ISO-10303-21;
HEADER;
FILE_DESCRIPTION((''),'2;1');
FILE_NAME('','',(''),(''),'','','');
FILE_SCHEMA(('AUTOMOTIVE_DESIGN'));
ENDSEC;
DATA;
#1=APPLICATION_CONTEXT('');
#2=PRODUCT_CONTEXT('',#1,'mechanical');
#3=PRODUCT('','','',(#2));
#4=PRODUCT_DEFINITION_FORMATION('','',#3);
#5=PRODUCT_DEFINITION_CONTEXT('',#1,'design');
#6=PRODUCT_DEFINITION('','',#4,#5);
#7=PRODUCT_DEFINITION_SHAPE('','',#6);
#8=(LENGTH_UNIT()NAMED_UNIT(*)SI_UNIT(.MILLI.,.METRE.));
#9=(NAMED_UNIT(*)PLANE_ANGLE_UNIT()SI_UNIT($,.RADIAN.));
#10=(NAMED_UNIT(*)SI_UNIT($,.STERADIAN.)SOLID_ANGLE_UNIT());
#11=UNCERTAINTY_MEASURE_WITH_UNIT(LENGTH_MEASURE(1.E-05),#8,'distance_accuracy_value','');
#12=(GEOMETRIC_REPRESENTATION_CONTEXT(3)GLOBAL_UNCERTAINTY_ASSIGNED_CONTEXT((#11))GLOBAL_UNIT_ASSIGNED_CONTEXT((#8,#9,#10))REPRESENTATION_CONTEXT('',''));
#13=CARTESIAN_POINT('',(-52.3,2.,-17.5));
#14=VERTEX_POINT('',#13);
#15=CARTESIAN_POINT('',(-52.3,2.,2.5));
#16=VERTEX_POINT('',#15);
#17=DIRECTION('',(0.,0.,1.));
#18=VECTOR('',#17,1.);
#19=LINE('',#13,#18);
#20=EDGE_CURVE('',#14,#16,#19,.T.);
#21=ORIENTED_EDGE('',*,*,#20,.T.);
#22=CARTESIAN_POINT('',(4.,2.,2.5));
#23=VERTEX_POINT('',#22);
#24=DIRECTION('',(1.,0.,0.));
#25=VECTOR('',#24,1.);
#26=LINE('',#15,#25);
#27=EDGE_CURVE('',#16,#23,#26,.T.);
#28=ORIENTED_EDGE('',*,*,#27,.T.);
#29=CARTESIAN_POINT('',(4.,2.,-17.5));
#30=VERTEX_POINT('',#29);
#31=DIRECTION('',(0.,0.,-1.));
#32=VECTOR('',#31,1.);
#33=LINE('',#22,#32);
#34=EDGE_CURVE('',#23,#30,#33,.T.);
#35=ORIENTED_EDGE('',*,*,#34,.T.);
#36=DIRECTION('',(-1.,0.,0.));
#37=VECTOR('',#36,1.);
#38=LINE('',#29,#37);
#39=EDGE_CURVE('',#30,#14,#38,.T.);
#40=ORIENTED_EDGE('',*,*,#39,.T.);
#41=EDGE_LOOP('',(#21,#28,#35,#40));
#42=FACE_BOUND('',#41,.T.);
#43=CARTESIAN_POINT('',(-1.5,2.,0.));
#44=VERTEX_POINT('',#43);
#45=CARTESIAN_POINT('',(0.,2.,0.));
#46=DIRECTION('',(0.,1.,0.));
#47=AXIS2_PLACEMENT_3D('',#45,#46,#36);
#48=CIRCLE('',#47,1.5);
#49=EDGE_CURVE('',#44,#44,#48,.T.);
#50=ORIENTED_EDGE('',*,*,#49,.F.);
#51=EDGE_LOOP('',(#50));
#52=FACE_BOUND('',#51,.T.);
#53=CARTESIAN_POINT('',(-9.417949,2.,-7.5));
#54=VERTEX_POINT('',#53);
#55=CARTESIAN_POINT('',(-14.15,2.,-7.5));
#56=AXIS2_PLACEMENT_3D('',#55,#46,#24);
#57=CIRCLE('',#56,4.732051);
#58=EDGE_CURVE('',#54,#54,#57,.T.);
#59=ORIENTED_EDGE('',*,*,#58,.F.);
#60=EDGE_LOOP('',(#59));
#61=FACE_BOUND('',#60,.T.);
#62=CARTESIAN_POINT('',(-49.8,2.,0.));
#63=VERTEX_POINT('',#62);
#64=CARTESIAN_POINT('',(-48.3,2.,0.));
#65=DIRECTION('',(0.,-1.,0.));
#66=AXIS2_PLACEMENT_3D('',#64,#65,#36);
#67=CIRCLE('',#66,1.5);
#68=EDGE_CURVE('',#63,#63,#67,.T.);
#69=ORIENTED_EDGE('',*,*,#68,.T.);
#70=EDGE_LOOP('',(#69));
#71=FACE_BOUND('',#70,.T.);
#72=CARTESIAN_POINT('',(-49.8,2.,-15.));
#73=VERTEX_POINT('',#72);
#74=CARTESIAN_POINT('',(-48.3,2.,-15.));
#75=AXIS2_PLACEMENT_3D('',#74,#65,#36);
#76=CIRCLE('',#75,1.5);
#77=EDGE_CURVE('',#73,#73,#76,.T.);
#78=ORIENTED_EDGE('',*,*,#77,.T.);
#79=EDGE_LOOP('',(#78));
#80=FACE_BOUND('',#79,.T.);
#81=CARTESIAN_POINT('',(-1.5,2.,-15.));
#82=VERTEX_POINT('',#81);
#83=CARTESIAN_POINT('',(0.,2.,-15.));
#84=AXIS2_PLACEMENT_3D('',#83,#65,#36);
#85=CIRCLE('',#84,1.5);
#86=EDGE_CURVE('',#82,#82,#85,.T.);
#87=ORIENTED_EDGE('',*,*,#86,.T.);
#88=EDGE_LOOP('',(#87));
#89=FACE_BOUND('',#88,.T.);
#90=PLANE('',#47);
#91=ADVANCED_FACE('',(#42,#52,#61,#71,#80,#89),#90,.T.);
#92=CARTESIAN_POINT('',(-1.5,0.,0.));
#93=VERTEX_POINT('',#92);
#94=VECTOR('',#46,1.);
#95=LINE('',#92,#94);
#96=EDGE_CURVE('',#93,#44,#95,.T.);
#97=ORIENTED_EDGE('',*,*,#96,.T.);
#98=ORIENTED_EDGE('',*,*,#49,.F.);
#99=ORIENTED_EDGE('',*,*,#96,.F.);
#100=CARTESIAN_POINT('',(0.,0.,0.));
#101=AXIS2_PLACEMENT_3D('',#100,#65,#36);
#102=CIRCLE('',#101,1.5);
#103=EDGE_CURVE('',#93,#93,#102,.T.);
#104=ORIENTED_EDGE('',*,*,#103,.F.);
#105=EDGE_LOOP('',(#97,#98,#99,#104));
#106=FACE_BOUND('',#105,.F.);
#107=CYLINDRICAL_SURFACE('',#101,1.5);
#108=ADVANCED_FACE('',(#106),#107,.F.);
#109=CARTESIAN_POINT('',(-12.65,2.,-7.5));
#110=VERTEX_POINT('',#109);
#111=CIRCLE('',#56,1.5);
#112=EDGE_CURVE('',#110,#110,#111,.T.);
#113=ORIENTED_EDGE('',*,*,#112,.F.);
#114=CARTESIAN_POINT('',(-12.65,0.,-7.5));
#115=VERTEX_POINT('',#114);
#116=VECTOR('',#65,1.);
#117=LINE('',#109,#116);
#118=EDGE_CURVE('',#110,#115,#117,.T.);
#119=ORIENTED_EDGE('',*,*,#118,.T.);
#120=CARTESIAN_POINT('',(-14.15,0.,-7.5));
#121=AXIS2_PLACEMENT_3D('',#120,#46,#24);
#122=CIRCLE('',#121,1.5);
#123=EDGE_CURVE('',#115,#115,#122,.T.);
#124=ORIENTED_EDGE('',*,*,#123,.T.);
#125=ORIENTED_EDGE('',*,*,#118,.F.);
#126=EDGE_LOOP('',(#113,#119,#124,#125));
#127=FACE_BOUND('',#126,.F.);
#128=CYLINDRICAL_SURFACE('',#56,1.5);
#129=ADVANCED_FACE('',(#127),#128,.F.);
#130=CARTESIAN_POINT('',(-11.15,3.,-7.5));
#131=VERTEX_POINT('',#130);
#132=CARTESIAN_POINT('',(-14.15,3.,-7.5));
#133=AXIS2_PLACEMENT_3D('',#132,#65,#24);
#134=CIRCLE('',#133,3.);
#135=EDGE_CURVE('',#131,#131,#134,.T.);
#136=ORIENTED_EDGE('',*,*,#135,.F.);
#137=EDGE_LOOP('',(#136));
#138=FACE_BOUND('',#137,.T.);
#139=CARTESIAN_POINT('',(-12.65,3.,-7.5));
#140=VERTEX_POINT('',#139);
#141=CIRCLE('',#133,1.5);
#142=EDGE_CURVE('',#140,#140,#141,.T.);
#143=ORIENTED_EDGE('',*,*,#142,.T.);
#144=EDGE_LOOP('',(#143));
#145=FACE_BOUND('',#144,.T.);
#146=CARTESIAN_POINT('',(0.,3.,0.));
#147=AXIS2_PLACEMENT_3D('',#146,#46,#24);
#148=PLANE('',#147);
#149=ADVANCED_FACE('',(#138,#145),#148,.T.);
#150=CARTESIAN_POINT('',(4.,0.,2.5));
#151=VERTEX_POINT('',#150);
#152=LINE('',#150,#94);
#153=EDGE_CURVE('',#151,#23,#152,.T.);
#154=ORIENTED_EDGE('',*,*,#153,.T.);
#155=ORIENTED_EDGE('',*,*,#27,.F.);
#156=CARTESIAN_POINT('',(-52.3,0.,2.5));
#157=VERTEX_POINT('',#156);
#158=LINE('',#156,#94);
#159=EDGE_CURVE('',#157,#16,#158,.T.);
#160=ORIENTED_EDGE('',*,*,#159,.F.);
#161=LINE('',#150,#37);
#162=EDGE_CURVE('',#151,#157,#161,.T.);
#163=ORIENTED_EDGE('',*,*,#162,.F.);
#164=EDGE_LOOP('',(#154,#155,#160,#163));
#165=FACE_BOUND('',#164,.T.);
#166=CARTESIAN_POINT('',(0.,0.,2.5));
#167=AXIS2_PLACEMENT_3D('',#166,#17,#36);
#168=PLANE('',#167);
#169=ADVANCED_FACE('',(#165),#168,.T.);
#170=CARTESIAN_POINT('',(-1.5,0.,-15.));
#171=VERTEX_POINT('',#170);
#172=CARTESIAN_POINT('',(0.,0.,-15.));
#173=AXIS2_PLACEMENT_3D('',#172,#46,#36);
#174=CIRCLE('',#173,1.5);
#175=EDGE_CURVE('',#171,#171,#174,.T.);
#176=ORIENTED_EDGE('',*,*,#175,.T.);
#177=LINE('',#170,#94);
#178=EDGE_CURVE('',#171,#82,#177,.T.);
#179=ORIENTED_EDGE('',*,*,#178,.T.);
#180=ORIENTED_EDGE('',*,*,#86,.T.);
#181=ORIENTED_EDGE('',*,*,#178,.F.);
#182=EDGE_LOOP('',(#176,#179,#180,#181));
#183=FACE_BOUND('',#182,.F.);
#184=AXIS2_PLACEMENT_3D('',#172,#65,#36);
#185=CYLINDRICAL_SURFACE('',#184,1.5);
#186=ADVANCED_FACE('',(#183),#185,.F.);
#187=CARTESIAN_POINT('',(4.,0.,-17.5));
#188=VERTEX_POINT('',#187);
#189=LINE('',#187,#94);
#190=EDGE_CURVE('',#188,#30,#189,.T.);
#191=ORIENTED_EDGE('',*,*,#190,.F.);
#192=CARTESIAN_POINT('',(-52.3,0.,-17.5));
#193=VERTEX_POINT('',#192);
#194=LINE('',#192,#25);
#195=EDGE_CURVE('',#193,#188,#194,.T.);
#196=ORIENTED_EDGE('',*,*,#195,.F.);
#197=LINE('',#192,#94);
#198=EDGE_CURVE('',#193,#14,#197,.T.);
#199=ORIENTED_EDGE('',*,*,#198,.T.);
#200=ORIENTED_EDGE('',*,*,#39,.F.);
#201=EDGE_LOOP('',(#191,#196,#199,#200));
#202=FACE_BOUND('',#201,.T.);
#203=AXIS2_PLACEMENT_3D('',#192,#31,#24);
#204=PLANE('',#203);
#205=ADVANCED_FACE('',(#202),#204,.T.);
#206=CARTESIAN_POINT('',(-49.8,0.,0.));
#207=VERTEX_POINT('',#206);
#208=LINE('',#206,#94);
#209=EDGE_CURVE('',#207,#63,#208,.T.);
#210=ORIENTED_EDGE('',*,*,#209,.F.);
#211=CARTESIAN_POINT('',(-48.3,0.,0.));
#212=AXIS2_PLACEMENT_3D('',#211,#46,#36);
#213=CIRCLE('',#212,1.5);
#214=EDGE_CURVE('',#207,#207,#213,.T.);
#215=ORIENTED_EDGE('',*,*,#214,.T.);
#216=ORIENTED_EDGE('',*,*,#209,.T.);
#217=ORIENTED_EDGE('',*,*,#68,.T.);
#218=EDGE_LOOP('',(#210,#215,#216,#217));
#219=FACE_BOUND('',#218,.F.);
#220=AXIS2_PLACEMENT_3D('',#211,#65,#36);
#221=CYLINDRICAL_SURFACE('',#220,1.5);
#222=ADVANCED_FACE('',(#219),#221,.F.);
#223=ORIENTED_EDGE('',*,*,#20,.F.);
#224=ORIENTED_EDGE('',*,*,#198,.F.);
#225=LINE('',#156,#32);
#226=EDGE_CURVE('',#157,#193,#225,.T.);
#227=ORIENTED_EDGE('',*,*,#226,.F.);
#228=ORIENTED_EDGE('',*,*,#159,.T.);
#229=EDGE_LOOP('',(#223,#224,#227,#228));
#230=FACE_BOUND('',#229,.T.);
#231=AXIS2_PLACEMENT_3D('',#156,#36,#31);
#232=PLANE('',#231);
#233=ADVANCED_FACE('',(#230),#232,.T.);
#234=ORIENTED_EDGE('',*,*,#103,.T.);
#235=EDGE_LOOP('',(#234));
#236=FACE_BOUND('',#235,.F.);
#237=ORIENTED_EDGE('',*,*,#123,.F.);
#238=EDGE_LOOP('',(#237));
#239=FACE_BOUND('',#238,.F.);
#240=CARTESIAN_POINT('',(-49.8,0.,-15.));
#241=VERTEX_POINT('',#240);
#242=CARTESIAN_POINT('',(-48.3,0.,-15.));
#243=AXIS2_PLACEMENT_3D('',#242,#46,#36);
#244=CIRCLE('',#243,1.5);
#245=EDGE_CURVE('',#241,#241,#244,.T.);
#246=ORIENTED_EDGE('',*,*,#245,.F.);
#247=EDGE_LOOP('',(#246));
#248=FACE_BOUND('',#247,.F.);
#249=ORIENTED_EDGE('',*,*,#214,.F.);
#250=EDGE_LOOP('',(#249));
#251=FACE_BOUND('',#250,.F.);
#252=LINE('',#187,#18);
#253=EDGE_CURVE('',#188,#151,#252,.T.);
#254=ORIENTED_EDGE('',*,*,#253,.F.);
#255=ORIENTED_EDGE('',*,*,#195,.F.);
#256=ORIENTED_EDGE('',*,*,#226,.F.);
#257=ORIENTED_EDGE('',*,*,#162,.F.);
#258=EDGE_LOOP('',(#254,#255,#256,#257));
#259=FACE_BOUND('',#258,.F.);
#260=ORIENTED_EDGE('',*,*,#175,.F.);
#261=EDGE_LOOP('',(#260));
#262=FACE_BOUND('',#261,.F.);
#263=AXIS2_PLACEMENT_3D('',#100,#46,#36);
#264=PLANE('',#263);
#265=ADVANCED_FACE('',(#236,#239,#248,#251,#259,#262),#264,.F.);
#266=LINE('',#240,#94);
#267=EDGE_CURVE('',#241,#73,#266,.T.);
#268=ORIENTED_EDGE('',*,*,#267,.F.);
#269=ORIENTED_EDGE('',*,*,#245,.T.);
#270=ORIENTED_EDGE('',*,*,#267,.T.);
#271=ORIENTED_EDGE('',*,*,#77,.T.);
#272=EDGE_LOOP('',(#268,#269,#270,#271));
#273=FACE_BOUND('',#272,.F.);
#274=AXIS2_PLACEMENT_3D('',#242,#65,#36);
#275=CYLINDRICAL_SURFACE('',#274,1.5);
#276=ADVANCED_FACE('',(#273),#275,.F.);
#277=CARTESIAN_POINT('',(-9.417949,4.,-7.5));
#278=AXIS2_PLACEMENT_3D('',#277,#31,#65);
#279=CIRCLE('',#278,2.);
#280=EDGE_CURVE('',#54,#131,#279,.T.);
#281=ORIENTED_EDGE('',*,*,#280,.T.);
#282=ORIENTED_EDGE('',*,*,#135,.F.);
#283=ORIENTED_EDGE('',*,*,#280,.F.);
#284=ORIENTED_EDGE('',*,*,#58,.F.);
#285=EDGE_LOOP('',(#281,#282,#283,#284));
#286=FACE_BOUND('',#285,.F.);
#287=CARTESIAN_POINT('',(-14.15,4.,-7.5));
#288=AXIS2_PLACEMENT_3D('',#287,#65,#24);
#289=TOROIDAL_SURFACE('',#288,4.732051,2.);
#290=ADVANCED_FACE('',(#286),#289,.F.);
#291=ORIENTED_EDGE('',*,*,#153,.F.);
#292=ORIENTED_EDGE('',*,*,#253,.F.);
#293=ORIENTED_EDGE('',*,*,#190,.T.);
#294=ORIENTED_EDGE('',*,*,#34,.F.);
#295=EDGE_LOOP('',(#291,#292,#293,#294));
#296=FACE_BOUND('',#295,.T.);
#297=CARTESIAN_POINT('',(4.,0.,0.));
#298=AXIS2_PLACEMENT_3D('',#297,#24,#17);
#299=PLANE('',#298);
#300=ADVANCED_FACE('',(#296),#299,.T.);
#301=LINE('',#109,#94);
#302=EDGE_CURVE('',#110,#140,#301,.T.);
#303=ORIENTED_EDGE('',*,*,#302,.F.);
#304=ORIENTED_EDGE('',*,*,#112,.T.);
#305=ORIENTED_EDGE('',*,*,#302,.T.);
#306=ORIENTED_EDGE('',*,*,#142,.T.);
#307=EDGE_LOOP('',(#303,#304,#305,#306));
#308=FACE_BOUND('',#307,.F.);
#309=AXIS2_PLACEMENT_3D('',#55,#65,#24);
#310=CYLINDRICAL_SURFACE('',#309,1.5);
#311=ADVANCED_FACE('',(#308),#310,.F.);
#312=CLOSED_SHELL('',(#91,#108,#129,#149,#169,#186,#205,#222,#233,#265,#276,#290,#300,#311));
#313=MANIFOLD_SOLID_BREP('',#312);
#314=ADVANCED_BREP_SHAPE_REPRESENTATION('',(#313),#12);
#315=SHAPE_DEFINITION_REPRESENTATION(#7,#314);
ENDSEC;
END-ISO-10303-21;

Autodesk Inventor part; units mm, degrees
ref_plane "YZ Plane" through (0, 0, 0) normal (1, 0, 0) x (0, 1, 0)
ref_plane "XZ Plane" through (0, 0, 0) normal (0, 1, 0) x (-1, 0, 0)
ref_plane "XY Plane" through (0, 0, 0) normal (0, 0, 1) x (1, 0, 0)
sketch "Sketch1" plane through (0, 0, 0) normal (0, 1, 0) x (-1, 0, 0)
  line L0 (0, 0) -> (48.3, 0)
  line L1 (48.3, 0) -> (48.3, -15)
  line L2 (48.3, -15) -> (0, -15)
  line L3 (0, -15) -> (0, 0)
  circle A0 centre (48.3, 0) radius 1.5
  circle A1 centre (48.3, -15) radius 1.5
  circle A2 centre (0, 0) radius 1.5
  circle A3 centre (0, -15) radius 1.5
  line L4 (48.3, -15) -> (52.3, -15)
  line L5 (52.3, -15) -> (52.3, -17.5)
  line L6 (52.3, -17.5) -> (48.3, -17.5)
  line L7 (48.3, -17.5) -> (48.3, -15)
  line L8 (0, 0) -> (-4, 0)
  line L9 (-4, 0) -> (-4, 2.5)
  line L10 (-4, 2.5) -> (0, 2.5)
  line L11 (0, 2.5) -> (0, 0)
  line L12 (-4, 2.5) -> (52.3, 2.5)
  line L13 (52.3, 2.5) -> (52.3, -17.5)
  line L14 (52.3, -17.5) -> (-4, -17.5)
  line L15 (-4, -17.5) -> (-4, 2.5)
  dimension "d0" = 48.3
  dimension "d1" = 15
  dimension "d2" = 3
  dimension "d3" = 3
  dimension "d4" = 3
  dimension "d5" = 3
  dimension "d6" = 4
  dimension "d7" = 2.5
  dimension "d8" = 4
  dimension "d9" = 2.5
extrude "Extrusion1" add sketch "Sketch1" along normal blind 2 contours A2 L11 L12 L13 L4 A1 L1 A0 L0 | L0 A0 L1 A1 L2 A3 L3 A2 | L3 A3 L2 A1 L7 L14 L15 L8 A2 | L8 L9 L10 L11 A2 | L7 A1 L4 L5 L6
sketch "Sketch2" plane through (0, 2, 0) normal (0, 1, 0) x (1, 0, 0)
  line L0 (4, -2.5) -> (4, 17.5) projected
  line L1 (4, -2.5) -> (-14.15, -2.5)
  line L2 (-14.15, -2.5) -> (-14.15, 7.5)
  line L3 (-14.15, 7.5) -> (4, 7.5)
  line L4 (4, 7.5) -> (4, -2.5)
  circle A0 centre (-14.15, 7.5) radius 3
  circle A1 centre (-14.15, 7.5) radius 1.5
  point P0 (0, 0)
  dimension "d12" = 18.15
  dimension "d13" = 10
  dimension "d14" = 6
  dimension "d19" = 3
extrude "Extrusion2" add sketch "Sketch2" along normal blind 1 contours A0 L2 A1 L3 | L3 A1 L2 A0
extrude "Extrusion3" cut sketch "Sketch2" against normal blind 3 contours A1 L2 L3 | L3 L2 A1
fillet "Fillet2" radius 2 1 edges at (-17.15, 2, -7.5)
properties part number "back_servo_support"
